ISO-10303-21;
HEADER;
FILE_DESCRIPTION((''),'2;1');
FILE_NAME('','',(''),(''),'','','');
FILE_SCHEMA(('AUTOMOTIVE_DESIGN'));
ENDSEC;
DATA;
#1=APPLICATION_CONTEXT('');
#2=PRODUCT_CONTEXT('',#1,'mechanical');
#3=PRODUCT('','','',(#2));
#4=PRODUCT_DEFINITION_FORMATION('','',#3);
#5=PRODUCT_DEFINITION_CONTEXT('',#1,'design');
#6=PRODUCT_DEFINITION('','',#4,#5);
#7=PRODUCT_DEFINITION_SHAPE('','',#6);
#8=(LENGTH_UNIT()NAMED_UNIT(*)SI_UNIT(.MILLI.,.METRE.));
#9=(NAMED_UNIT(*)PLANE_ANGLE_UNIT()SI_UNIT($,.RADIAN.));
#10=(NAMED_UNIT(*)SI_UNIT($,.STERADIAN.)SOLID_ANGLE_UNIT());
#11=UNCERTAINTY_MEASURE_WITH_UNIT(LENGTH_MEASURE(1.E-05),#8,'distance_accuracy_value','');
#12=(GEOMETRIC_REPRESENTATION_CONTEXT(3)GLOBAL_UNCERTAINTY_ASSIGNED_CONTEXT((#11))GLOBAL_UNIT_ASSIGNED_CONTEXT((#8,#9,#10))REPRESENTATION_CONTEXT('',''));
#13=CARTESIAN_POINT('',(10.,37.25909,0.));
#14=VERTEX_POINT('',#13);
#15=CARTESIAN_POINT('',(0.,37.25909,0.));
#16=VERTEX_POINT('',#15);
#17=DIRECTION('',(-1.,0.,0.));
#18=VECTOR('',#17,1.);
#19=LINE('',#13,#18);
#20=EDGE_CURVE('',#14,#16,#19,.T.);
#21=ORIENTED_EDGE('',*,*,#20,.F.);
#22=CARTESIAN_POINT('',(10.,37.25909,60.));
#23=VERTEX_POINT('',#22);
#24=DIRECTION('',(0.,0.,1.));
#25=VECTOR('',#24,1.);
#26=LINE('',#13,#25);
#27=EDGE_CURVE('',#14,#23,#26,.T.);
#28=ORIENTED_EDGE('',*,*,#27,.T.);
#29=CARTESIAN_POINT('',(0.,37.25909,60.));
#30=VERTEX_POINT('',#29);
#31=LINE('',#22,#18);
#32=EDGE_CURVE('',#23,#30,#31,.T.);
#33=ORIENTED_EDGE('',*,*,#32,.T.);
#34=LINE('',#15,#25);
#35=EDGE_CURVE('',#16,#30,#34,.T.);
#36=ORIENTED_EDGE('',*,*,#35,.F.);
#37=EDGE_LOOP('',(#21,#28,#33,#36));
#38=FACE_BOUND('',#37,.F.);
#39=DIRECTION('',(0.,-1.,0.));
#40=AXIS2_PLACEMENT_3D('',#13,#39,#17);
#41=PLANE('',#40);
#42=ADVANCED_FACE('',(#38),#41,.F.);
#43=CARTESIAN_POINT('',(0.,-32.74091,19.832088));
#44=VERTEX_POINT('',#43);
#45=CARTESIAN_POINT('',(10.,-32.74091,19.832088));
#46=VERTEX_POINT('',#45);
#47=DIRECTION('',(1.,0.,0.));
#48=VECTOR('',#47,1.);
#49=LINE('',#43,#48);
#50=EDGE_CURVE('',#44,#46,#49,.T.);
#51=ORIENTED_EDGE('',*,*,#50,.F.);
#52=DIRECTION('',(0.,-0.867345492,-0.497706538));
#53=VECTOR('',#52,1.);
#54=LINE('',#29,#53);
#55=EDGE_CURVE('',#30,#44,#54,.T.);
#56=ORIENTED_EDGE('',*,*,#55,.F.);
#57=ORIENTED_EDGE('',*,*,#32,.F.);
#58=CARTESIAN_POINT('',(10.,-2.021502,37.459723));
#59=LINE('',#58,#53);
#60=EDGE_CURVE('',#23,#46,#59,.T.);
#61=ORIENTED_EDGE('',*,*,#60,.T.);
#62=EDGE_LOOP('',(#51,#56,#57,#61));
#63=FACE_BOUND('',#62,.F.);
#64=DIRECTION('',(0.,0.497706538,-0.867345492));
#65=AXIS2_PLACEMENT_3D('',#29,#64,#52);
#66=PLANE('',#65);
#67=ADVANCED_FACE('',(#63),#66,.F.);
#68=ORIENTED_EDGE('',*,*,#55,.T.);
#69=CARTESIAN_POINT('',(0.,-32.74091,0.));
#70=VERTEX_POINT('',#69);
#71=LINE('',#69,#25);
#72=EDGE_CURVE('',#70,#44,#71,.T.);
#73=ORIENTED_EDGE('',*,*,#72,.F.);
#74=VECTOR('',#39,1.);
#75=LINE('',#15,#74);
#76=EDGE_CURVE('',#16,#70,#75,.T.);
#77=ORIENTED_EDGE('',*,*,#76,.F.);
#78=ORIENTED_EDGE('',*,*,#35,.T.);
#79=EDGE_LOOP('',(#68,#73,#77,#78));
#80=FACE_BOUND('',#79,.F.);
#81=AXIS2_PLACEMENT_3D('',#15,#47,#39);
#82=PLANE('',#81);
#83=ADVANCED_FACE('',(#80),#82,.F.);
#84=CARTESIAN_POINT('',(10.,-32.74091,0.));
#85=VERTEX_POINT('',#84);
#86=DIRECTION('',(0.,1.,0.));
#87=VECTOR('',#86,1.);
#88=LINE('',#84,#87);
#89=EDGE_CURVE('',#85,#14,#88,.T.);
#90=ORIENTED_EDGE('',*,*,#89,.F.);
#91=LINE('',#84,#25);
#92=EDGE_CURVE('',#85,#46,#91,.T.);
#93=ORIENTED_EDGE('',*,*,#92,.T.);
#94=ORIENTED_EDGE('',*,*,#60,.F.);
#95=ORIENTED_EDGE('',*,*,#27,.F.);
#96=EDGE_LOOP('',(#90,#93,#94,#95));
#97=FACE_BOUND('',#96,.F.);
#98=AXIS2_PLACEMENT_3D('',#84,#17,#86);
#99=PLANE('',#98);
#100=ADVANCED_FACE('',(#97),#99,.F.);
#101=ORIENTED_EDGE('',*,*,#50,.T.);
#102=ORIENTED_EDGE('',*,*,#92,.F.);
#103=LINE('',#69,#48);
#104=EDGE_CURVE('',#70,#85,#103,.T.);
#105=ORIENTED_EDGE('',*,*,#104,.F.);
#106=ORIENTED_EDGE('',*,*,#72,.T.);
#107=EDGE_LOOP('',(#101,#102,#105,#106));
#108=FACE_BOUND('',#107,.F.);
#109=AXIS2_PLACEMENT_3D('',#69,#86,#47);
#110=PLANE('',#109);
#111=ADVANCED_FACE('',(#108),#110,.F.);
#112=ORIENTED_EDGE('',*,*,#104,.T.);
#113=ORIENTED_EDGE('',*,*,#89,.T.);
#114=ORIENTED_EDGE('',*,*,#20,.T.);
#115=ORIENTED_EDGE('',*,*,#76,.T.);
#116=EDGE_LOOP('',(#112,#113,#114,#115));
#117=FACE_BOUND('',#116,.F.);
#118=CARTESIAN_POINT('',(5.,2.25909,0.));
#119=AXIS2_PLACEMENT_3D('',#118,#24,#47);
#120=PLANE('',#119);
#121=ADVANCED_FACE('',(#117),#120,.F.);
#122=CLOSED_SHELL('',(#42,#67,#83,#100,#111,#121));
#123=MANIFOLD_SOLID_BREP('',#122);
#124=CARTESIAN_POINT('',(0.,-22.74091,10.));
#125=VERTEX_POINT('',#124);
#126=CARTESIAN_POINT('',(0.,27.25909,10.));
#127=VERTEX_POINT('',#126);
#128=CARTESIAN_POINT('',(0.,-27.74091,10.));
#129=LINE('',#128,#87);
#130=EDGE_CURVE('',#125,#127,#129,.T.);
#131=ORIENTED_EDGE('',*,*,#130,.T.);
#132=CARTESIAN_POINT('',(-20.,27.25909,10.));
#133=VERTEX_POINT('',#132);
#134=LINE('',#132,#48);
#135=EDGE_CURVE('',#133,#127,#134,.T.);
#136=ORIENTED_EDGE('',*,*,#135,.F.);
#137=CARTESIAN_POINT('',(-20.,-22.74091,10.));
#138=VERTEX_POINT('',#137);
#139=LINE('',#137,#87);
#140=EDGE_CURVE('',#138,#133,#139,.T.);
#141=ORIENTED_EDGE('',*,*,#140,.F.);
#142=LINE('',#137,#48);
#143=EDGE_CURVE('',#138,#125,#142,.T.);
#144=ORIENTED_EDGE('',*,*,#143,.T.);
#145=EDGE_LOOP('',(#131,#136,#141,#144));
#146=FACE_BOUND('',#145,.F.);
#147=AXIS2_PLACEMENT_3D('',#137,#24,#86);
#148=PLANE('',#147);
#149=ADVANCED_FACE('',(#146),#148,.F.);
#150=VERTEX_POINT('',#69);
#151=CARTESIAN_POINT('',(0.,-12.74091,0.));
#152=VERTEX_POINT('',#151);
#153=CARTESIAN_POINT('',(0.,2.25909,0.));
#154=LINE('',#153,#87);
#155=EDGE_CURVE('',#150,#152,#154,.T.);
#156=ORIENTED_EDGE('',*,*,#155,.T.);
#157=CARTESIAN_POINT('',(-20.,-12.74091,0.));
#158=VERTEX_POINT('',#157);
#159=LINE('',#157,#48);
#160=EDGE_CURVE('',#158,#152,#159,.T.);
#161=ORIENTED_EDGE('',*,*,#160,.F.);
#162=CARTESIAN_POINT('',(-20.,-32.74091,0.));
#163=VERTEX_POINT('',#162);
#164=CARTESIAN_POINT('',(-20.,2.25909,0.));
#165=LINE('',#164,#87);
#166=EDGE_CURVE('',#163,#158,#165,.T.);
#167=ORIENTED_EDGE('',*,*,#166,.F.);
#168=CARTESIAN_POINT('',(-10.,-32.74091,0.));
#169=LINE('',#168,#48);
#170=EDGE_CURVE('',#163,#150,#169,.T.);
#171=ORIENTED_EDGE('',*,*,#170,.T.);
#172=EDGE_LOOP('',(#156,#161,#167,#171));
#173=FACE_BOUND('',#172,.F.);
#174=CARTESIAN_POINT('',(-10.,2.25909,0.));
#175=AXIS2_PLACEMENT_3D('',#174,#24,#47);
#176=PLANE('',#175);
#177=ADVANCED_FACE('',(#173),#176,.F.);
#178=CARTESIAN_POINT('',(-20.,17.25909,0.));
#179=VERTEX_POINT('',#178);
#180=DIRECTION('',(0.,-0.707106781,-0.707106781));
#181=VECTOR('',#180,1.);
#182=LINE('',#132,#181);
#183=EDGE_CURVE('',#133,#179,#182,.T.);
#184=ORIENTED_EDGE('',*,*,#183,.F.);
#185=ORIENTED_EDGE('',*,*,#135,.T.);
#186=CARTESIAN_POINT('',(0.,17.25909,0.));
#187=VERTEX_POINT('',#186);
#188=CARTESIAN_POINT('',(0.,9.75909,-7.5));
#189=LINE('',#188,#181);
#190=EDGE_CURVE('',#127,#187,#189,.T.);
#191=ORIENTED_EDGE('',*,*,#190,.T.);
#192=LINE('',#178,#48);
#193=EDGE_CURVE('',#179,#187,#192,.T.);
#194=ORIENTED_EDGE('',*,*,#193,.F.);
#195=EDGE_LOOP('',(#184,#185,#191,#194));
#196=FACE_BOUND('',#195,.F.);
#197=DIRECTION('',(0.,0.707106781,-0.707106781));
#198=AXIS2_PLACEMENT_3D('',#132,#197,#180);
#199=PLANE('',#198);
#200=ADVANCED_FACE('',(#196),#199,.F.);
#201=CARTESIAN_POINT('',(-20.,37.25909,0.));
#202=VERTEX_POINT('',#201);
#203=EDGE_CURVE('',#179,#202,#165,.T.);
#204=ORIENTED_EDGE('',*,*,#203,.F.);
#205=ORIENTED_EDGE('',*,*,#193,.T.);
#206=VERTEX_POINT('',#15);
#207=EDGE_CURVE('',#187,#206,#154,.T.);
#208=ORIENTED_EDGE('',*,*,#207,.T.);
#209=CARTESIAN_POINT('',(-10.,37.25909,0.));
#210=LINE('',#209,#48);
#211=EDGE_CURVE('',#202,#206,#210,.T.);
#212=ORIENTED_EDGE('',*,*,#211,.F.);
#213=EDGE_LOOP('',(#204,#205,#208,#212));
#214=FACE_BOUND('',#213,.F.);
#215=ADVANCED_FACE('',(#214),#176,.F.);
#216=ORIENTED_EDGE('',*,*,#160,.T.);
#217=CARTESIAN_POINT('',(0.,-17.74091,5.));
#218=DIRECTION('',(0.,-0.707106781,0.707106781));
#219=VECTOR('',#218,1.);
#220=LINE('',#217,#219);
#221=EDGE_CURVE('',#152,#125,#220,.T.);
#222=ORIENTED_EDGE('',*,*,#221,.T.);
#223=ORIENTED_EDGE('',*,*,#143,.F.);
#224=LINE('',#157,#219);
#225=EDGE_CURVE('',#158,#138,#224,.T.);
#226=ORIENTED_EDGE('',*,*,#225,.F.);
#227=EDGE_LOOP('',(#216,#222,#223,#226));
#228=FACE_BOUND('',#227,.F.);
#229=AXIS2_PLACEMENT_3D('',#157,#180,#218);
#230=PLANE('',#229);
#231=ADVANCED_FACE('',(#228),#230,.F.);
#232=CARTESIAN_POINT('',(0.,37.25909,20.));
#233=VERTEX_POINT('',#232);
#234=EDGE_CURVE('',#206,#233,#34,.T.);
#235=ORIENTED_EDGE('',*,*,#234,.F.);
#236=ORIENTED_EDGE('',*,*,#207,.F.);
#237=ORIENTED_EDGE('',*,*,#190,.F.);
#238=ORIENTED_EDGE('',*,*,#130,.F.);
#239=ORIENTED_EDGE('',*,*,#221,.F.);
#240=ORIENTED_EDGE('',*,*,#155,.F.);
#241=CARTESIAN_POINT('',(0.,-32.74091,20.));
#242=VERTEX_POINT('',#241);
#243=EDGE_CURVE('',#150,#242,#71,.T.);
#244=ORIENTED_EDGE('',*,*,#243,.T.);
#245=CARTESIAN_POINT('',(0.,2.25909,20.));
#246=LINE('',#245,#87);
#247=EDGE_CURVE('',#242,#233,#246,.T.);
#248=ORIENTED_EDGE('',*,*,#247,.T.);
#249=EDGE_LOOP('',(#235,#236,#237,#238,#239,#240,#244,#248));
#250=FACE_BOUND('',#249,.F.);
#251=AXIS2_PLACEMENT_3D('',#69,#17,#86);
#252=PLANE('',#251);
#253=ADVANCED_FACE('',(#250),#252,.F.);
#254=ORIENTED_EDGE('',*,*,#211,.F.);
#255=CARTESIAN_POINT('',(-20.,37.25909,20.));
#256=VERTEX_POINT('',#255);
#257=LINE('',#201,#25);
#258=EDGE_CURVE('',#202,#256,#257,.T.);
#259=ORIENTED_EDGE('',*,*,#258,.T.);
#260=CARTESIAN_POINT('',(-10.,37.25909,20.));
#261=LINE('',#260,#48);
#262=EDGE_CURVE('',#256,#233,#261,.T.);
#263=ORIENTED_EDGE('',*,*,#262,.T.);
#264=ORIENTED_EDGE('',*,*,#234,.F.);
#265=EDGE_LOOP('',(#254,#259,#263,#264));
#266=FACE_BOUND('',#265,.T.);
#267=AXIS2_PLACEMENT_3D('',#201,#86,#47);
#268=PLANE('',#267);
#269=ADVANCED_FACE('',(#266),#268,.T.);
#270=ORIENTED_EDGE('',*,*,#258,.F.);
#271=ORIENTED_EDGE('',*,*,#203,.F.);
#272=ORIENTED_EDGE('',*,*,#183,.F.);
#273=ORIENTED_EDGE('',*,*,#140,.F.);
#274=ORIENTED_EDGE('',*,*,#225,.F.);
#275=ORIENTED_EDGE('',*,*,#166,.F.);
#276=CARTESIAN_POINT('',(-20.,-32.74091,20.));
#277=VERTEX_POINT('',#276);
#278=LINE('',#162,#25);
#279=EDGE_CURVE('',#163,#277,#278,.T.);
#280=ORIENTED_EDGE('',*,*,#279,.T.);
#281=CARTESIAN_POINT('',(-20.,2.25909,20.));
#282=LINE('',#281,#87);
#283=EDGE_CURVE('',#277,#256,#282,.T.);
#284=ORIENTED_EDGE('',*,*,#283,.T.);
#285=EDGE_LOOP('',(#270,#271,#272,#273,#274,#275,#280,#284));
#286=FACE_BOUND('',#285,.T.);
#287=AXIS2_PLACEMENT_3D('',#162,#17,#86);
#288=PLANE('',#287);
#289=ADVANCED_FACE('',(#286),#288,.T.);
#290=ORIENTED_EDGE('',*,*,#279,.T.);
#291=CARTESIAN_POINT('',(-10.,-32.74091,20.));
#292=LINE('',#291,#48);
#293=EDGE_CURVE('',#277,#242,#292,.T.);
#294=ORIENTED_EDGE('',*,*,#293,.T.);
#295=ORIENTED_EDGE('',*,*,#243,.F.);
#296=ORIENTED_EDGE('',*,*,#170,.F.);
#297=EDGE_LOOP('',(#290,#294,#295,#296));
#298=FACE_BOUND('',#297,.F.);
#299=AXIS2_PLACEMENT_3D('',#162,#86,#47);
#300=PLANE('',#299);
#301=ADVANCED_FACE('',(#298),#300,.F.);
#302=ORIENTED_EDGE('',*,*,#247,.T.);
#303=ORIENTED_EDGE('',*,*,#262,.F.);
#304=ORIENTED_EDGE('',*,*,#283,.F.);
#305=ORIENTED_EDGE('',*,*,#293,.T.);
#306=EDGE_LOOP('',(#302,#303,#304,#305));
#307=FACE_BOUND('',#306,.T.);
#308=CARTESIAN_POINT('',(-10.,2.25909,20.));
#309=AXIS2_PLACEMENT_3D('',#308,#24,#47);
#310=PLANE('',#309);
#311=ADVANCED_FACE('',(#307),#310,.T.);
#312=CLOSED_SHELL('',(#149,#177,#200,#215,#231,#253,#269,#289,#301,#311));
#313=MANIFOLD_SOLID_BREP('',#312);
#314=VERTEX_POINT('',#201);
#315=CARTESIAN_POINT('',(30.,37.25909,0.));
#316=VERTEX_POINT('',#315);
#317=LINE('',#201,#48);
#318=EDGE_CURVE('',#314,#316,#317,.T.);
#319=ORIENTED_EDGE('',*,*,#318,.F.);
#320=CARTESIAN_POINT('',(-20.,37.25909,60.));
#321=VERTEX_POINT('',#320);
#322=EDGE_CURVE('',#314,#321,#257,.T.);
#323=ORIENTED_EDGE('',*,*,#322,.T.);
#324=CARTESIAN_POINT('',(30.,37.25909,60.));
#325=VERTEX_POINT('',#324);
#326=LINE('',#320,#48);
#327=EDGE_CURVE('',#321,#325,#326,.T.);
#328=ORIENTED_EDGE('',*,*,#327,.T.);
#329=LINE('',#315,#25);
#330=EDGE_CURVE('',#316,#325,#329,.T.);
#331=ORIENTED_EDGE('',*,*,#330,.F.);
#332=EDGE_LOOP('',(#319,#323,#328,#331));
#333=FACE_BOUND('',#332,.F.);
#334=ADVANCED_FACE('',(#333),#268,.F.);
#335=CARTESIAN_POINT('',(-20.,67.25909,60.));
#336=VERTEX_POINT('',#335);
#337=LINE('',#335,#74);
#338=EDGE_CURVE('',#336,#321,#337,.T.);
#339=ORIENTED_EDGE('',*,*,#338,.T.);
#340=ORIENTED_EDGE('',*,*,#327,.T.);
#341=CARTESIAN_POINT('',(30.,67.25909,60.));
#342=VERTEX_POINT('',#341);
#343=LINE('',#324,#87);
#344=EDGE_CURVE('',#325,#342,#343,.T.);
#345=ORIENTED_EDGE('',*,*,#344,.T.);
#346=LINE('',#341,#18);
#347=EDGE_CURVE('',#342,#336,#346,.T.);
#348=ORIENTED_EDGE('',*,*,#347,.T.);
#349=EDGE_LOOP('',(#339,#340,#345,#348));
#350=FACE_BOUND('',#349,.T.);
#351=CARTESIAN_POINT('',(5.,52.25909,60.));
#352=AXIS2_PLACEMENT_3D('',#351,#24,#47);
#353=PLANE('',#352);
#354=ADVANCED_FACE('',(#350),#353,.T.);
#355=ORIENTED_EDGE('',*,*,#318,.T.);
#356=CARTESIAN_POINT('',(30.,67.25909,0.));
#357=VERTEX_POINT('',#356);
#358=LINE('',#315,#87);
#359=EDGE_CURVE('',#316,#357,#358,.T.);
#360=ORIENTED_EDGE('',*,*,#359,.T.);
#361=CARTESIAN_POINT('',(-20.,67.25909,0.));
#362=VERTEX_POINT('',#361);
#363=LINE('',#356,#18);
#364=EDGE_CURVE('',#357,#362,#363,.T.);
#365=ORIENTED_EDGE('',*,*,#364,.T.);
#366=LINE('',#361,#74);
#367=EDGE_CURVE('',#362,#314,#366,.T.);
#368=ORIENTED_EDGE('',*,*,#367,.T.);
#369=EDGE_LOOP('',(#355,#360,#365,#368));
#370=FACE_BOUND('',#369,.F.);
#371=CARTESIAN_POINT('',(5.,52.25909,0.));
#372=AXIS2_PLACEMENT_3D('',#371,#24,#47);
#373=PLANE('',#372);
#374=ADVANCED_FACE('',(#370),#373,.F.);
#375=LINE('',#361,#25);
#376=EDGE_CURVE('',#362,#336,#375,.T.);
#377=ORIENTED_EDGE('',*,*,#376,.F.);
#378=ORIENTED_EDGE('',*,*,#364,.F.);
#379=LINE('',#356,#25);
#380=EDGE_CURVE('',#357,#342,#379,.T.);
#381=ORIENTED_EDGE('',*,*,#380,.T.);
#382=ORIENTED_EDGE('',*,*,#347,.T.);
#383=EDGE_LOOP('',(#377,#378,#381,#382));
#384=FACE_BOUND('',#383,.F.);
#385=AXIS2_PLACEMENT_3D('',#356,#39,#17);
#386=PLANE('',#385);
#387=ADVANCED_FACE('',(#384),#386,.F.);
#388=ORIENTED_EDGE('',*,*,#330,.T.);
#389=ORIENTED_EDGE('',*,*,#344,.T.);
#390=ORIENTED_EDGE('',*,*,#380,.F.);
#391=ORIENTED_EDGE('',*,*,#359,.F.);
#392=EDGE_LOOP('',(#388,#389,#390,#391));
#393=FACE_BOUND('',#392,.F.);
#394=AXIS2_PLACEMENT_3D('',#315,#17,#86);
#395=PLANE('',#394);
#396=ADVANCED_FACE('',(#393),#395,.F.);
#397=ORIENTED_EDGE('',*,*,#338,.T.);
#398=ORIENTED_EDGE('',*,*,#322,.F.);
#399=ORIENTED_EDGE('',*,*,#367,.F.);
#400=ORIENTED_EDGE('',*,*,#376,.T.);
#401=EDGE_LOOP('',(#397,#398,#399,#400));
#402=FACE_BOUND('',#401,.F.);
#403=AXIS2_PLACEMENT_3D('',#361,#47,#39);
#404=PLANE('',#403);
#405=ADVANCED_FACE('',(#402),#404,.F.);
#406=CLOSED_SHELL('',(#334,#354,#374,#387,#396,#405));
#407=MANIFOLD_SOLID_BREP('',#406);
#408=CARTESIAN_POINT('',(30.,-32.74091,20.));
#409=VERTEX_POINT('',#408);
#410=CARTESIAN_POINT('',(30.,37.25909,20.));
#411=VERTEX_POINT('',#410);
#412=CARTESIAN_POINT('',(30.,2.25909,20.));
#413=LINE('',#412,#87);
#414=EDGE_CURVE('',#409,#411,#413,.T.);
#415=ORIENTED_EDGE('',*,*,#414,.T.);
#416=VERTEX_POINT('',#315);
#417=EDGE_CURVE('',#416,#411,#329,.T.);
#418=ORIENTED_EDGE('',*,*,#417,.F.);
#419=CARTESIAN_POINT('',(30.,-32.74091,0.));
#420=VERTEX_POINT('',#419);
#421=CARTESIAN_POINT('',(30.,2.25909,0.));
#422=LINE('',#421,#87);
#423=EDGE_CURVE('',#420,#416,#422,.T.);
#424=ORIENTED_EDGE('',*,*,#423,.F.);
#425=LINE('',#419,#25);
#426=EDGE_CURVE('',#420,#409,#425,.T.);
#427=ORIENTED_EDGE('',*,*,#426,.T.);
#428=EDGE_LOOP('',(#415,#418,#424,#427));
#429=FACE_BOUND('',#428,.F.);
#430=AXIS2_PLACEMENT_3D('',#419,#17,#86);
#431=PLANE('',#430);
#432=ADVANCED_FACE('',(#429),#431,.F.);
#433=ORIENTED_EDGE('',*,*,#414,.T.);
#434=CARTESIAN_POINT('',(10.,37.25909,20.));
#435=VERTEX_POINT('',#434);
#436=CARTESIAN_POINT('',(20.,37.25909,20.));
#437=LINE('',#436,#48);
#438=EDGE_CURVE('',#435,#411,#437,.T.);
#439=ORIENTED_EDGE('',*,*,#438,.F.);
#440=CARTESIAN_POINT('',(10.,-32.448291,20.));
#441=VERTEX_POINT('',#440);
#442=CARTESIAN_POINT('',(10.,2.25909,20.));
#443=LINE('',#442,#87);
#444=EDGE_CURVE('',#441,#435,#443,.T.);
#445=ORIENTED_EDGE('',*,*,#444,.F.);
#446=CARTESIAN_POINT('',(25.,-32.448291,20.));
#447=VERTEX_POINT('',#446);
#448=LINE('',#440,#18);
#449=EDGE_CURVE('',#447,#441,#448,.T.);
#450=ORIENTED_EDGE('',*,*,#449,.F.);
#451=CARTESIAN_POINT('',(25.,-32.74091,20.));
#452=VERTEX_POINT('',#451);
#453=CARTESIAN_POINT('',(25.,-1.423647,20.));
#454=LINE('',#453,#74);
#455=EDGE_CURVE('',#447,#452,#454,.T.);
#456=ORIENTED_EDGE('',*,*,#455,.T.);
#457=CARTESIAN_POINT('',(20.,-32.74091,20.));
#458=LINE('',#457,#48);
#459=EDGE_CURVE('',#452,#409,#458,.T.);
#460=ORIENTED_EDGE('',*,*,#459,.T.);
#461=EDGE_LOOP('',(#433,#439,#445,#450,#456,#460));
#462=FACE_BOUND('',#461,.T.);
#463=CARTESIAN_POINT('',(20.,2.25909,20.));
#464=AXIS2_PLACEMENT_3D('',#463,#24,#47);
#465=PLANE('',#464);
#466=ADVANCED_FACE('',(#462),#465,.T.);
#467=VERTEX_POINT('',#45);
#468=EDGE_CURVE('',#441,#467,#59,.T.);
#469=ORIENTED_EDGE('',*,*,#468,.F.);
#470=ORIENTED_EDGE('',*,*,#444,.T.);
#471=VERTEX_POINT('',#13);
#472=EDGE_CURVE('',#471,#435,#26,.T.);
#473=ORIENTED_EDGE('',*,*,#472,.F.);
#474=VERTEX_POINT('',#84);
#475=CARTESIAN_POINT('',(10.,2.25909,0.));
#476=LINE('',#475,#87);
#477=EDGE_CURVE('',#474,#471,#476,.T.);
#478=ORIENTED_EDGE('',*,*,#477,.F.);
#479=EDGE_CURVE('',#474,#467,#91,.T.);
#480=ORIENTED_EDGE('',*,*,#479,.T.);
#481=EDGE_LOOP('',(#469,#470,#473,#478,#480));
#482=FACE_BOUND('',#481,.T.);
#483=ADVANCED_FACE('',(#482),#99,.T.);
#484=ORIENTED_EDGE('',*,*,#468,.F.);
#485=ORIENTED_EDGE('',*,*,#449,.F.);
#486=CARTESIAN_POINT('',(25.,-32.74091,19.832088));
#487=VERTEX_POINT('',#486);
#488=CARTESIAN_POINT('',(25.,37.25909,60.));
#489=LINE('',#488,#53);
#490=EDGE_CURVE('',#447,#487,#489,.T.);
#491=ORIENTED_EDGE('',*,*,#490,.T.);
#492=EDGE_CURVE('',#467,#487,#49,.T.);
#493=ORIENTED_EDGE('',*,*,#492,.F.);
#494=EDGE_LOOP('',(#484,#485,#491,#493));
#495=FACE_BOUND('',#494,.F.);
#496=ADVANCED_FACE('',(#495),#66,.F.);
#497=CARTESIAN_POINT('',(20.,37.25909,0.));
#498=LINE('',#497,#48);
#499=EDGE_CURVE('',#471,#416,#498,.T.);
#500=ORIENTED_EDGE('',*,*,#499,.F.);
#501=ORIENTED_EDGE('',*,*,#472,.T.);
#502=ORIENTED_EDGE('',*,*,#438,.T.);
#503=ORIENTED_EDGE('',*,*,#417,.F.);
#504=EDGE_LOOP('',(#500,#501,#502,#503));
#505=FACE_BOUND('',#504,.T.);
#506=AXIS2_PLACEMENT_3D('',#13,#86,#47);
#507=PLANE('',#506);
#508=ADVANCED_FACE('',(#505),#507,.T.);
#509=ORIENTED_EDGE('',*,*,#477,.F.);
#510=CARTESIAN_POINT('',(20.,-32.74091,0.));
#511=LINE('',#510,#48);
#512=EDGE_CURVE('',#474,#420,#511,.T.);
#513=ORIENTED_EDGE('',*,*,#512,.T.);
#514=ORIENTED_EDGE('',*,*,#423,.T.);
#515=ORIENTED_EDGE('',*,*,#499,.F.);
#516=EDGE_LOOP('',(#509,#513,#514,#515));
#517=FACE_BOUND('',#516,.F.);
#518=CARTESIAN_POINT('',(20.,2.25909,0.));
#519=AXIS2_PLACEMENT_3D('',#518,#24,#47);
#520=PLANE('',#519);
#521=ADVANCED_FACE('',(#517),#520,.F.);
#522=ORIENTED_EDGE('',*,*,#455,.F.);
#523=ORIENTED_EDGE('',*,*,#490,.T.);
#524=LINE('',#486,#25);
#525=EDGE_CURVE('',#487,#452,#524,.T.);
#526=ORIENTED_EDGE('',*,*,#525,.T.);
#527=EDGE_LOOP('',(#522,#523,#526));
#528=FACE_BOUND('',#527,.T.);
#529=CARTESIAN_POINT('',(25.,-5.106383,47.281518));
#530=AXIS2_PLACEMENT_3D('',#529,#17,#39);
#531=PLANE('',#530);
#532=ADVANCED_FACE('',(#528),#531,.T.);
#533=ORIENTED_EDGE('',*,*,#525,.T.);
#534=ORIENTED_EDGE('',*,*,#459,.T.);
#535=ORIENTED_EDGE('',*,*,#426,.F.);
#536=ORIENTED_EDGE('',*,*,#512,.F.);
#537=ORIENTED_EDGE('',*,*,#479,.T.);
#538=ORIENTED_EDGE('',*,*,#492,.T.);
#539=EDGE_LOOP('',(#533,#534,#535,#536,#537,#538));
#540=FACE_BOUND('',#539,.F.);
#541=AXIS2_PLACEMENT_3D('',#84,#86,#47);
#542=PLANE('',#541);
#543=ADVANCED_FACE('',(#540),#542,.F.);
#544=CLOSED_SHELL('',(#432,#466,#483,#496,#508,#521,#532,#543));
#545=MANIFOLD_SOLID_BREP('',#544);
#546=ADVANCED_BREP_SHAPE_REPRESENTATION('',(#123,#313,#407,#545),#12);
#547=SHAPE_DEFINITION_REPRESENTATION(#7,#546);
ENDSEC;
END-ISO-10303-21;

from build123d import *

# Parameters (mm, degrees)
F0_W     = 20
F0_H     = 70
F1_DEPTH = 20
F2_DEPTH = 60
F3_DEPTH = 60
F5_DEPTH = 25
F6_W     = 30
F6_H     = 10
F7_DEPTH = 107


with BuildPart() as f1:
    # F0 (on Top) → F1 (new body)
    with BuildSketch(Plane.XY):
        with Locations((-10, 2.2590903938)):
            Rectangle(F0_W, F0_H)
    extrude(amount=F1_DEPTH)

    # F6 (on face) → F7 (cut)
    with BuildSketch(Plane(origin=(-20, 0, 0), x_dir=(0, -1, 0), z_dir=(-1, 0, 0))):
        with Locations((-2.2590903938, 5)):
            Rectangle(F6_W, F6_H)
        Polygon((-27.2590903938, 10), (-17.2590903938, 0), (-17.2590903938, 10), align=None)
        Polygon((12.7409096062, 10), (12.7409096062, 0), (22.7409096062, 10), align=None)
    extrude(amount=-F7_DEPTH, mode=Mode.SUBTRACT)


with BuildPart() as f1b:
    # F0 (on Top) → F1, piece 2 (new body)
    with BuildSketch(Plane.XY):
        with Locations((20, 2.2590903938)):
            Rectangle(F0_W, F0_H)
    extrude(amount=F1_DEPTH)


with BuildPart() as f2:
    # F0 (on Top) → F2 (new body)
    with BuildSketch(Plane.XY):
        Polygon((30, 67.2590903938), (-20, 67.2590903938), (-20, 37.2590903938), (0, 37.2590903938), (5, 37.2590903938), (10, 37.2590903938), (30, 37.2590903938), align=None)
    extrude(amount=F2_DEPTH)


with BuildPart() as f3:
    # F0 (on Top) → F3 (new body)
    with BuildSketch(Plane.XY):
        Polygon((5, 37.2590903938), (0, 37.2590903938), (0, -32.7409096062), (10, -32.7409096062), (10, 37.2590903938), align=None)
    extrude(amount=F3_DEPTH)


with BuildPart() as f5_tool:
    # F4 (on face) → F5 (new body)
    with BuildSketch(Plane(origin=(0, 0, 0), x_dir=(0, -1, 0), z_dir=(-1, 0, 0))):
        Polygon((32.7409096062, 60), (-37.2590903938, 60), (32.7409096062, 19.8320876807), align=None)
    extrude(amount=-F5_DEPTH)


with BuildPart() as f1b_1:
    add(f1b.part)

    # F5: cut by f5_tool
    add(f5_tool.part, mode=Mode.SUBTRACT)


with BuildPart() as f3_1:
    add(f3.part)

    # F5: cut by f5_tool
    add(f5_tool.part, mode=Mode.SUBTRACT)


solid = Compound([f1.part, f2.part, f1b_1.part, f3_1.part])
